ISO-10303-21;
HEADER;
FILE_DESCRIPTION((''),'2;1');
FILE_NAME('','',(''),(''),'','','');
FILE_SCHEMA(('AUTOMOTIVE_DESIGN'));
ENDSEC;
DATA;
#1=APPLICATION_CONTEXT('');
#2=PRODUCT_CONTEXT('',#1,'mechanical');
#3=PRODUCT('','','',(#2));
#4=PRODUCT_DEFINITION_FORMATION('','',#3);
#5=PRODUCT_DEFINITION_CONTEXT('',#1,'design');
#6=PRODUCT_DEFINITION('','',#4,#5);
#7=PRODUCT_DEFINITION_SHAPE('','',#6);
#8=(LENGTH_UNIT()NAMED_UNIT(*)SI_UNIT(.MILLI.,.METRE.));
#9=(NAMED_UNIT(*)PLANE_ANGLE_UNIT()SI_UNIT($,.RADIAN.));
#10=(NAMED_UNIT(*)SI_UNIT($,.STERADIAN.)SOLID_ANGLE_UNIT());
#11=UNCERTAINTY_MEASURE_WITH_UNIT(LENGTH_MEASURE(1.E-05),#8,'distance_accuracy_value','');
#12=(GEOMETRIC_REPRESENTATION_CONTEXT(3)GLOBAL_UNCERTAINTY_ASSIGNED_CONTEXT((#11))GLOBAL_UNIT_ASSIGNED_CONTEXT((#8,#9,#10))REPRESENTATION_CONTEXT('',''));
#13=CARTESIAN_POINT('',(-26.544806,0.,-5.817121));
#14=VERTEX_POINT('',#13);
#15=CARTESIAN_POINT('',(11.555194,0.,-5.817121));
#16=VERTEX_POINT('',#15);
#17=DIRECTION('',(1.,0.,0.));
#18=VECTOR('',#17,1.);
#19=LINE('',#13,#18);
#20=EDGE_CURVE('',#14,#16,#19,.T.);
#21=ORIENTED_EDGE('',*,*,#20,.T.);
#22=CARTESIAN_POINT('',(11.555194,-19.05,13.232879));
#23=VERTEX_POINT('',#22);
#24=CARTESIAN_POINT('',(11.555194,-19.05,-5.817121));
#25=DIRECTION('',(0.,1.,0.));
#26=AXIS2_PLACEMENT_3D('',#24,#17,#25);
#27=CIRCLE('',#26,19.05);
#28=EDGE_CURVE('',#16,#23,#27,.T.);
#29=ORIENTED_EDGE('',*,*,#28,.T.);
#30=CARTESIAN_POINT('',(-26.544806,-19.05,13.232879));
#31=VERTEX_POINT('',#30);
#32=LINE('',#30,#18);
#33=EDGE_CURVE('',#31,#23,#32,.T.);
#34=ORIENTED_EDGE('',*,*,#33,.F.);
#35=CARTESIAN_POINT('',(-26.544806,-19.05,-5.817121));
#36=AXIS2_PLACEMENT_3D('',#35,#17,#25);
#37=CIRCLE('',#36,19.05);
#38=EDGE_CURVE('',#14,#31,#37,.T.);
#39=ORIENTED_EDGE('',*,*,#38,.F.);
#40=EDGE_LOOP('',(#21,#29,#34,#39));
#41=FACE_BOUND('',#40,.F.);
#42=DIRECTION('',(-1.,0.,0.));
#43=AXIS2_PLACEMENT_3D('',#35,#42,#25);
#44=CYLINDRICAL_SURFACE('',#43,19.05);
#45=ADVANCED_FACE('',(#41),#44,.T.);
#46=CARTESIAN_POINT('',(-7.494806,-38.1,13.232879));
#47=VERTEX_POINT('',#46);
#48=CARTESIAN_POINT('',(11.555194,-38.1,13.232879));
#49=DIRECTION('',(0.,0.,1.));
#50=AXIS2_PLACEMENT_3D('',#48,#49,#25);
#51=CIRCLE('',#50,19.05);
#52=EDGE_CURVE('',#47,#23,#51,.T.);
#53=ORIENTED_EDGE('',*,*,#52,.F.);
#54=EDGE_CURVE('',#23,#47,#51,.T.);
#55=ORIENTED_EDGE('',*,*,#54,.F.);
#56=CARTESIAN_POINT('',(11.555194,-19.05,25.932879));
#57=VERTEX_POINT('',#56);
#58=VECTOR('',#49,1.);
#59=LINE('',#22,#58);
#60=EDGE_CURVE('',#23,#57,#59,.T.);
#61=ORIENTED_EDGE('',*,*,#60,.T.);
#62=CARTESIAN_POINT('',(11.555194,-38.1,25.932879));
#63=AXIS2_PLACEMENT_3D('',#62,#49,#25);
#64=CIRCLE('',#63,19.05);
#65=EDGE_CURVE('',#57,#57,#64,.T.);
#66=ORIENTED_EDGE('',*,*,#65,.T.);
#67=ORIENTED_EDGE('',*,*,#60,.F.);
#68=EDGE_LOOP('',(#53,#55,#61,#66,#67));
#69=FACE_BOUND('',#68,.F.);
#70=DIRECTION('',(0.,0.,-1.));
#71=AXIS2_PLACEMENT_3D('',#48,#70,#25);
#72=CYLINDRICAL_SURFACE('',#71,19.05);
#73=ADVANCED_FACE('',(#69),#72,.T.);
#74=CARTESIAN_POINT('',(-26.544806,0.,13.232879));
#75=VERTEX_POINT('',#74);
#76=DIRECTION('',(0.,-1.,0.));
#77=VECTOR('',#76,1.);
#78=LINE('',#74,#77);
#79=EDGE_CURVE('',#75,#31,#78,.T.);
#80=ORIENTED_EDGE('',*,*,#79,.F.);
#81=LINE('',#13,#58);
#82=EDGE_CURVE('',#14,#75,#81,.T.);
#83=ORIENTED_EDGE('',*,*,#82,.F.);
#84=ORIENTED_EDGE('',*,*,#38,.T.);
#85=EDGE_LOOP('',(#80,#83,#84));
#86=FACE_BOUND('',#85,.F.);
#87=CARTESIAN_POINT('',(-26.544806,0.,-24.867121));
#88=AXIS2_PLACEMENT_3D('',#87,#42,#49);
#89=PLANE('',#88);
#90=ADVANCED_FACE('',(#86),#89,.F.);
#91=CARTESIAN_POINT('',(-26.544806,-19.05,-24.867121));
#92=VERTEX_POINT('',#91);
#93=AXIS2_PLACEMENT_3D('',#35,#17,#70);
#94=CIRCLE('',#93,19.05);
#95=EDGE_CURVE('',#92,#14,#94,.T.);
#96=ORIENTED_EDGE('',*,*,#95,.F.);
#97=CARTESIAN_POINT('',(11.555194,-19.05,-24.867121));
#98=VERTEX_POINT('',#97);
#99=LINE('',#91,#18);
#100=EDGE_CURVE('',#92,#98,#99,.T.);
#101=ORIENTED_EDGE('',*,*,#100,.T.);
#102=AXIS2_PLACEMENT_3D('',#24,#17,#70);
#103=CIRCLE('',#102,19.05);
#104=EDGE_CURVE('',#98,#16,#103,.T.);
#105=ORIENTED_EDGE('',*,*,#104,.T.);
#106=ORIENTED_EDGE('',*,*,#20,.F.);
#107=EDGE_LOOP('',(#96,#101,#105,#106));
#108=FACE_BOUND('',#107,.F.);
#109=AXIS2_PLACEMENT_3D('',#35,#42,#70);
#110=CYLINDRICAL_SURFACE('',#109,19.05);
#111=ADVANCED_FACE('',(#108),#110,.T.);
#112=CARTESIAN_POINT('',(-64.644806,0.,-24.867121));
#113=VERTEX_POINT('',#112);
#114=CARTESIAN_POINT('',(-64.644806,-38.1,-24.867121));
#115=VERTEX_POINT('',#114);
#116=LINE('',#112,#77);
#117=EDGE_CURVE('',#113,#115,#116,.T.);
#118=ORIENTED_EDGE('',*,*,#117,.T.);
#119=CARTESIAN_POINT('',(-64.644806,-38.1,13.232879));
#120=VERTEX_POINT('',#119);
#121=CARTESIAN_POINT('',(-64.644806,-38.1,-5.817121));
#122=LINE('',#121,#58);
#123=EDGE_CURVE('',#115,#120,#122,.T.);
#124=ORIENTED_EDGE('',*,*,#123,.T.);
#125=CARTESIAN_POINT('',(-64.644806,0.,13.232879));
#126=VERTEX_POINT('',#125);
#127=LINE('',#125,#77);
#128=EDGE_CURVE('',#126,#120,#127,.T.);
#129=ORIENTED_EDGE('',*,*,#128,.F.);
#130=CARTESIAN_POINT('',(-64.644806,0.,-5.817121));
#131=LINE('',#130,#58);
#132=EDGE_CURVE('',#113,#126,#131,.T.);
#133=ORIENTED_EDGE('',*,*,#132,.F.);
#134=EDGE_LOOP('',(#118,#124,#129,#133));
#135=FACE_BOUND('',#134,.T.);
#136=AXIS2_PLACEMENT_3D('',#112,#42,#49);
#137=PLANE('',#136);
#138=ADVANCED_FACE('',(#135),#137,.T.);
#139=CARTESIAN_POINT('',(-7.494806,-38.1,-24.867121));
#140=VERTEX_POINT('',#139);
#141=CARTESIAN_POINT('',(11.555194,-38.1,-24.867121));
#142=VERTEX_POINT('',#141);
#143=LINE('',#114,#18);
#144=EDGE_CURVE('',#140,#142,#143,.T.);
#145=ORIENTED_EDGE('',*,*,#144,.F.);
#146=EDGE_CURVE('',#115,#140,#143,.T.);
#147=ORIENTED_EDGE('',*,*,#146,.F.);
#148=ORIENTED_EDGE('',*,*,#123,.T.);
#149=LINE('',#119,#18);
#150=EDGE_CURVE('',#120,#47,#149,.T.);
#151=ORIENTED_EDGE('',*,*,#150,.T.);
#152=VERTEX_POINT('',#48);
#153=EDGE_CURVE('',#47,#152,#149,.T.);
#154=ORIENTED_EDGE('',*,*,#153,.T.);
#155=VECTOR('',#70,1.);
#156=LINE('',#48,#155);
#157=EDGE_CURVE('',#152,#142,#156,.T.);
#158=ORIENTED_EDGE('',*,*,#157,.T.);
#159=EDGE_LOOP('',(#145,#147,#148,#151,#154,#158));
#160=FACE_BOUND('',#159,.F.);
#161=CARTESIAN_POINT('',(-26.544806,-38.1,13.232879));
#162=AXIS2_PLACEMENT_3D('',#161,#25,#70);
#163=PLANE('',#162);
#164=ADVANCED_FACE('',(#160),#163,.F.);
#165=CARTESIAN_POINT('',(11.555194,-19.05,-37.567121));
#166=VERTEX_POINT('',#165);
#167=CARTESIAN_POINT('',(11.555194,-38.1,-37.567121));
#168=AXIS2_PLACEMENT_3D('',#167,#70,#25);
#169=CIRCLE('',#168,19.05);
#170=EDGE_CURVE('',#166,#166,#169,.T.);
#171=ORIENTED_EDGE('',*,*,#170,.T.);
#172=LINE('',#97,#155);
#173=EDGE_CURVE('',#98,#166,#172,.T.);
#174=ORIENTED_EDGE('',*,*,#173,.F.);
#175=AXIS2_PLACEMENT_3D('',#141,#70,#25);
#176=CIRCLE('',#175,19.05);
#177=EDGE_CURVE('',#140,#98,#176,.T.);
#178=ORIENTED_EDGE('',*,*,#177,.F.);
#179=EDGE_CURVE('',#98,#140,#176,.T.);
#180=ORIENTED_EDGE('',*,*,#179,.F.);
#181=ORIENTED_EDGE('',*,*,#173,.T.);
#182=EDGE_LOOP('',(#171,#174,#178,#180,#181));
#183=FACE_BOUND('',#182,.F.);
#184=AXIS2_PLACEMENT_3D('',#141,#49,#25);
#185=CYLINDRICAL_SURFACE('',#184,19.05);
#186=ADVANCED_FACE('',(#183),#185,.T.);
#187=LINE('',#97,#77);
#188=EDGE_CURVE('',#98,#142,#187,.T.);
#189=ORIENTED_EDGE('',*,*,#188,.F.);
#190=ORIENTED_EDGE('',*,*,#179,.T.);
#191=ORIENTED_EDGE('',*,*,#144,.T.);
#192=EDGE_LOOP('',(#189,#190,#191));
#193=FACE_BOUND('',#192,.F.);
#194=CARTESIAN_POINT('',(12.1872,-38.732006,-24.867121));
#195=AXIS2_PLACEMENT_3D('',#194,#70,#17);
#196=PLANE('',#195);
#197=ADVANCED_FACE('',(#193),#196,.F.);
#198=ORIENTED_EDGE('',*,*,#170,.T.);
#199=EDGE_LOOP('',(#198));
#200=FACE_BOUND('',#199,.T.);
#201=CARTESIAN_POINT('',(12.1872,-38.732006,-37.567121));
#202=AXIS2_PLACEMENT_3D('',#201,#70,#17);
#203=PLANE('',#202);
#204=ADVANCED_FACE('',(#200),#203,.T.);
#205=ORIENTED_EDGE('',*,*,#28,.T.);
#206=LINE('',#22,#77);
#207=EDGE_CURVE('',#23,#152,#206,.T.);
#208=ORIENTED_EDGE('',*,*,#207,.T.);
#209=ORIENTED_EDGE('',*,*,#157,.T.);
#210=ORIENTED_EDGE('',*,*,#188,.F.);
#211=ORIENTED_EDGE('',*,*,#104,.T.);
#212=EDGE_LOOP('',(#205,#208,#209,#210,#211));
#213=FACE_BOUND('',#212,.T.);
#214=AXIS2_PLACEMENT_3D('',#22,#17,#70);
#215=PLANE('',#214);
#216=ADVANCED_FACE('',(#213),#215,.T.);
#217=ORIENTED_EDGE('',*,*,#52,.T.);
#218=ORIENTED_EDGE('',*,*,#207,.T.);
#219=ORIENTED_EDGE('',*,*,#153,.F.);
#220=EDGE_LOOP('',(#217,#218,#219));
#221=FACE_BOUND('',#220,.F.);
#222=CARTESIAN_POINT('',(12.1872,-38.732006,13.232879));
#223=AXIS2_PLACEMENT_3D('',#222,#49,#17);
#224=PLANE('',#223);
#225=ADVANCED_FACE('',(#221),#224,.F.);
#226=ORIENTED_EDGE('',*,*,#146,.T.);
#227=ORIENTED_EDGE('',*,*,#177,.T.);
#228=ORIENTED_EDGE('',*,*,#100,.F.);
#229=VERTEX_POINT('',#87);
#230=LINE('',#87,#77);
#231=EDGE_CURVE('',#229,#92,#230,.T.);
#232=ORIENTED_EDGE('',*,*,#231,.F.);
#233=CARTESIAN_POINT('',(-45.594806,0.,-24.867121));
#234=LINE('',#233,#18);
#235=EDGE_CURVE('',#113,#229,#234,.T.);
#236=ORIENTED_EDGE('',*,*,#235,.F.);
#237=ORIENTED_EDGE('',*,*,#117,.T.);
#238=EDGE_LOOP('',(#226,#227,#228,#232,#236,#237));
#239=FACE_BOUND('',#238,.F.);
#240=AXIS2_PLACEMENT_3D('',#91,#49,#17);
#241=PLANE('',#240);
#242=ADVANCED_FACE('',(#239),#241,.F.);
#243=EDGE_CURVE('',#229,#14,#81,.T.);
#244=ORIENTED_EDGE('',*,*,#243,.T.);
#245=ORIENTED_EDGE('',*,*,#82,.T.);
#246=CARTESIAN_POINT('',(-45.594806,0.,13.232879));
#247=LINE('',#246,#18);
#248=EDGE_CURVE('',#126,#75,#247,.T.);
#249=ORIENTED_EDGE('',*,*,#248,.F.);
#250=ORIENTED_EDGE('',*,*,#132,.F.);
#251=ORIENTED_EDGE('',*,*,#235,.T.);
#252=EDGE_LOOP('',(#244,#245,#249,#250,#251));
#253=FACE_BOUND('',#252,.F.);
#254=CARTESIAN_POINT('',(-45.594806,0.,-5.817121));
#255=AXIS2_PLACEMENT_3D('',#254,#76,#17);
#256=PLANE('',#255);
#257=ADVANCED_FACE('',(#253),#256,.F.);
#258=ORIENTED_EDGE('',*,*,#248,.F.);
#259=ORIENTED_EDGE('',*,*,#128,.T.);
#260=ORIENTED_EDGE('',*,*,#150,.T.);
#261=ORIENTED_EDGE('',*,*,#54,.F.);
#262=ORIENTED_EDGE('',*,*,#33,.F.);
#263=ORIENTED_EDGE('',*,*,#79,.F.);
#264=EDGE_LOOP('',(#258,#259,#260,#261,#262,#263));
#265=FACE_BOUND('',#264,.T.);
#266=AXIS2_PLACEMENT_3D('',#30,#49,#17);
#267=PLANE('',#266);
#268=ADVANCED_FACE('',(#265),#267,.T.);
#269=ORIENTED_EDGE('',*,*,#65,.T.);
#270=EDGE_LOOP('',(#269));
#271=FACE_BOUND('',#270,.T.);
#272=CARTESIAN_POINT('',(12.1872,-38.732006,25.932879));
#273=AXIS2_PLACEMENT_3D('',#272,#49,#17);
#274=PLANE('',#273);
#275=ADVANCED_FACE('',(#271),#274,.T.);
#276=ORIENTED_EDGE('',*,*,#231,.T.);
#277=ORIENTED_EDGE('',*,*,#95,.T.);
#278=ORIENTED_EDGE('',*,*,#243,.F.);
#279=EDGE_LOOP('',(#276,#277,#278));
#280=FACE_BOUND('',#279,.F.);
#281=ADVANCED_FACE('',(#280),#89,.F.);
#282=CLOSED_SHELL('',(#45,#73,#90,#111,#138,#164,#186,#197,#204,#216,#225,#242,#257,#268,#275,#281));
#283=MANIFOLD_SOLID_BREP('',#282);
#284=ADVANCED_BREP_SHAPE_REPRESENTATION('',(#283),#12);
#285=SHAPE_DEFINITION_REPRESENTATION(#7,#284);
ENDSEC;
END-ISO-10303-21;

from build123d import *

# Parameters (mm, degrees)
F0_W     = 38.1
F0_H     = 38.1
F1_DEPTH = 38.1
F3_DEPTH = 38.1
F4_DEPTH = 19.05
F7_DEPTH = 12.7
F8_DEPTH = 12.7


# Not quite as in the source:
# - a feature of the source that left no trace in its solid (it failed there, or was rolled back) is left out


with BuildPart() as f1:
    # F0 (on Front) → F1 (new body)
    with BuildSketch(Plane.XZ):
        with Locations((-45.594806087, -5.8171211302)):
            Rectangle(F0_W, F0_H)
    extrude(amount=F1_DEPTH)

    # F2 (on face) → F3 (join)
    with BuildSketch(Plane.YZ.offset(-26.544806087)):
        with BuildLine():
            Line((-19.05, 13.2328788698), (-19.05, -24.8671211302))
            ThreePointArc((-19.05, -24.8671211302), (-5.5796158184, -19.2875053118), (0, -5.8171211302))
            ThreePointArc((0, -5.8171211302), (-5.5796158184, 7.6532630514), (-19.05, 13.2328788698))
        make_face()
    extrude(amount=F3_DEPTH)

    # F4 (add): a face of the model
    f4_faces = [f1.faces().sort_by_distance(p)[0] for p in [
        (-7.494806087, -19.05, -5.8171211302),
    ]]
    extrude(f4_faces, amount=F4_DEPTH)

    # F6 (on face) → F7 (join)
    with BuildSketch(Plane.XY.offset(13.2328788698)):
        with BuildLine():
            ThreePointArc((-7.494806087, -38.1), (11.555193913, -57.15), (30.605193913, -38.1))
            ThreePointArc((30.605193913, -38.1), (25.0255780946, -24.6296158184), (11.555193913, -19.05))
            Line((11.555193913, -19.05), (11.555193913, -38.1))
            Line((11.555193913, -38.1), (-7.494806087, -38.1))
        make_face()
        with BuildLine():
            Line((11.555193913, -38.1), (11.555193913, -19.05))
            ThreePointArc((11.555193913, -19.05), (-1.9151902686, -24.6296158184), (-7.494806087, -38.1))
            Line((-7.494806087, -38.1), (11.555193913, -38.1))
        make_face()
    extrude(amount=F7_DEPTH)

    # F5 (on face) → F8 (join)
    with BuildSketch(Plane(origin=(0, 0, -24.8671211302), x_dir=(1, 0, 0), z_dir=(0, 0, -1))):
        with BuildLine():
            Line((11.555193913, 38.1), (11.555193913, 19.05))
            ThreePointArc((11.555193913, 19.05), (25.0255780946, 24.6296158184), (30.605193913, 38.1))
            ThreePointArc((30.605193913, 38.1), (11.555193913, 57.15), (-7.494806087, 38.1))
            Line((-7.494806087, 38.1), (11.555193913, 38.1))
        make_face()
        with BuildLine():
            ThreePointArc((-7.494806087, 38.1), (-1.9151902686, 24.6296158184), (11.555193913, 19.05))
            Line((11.555193913, 19.05), (11.555193913, 38.1))
            Line((11.555193913, 38.1), (-7.494806087, 38.1))
        make_face()
    extrude(amount=F8_DEPTH)


solid = f1.part
